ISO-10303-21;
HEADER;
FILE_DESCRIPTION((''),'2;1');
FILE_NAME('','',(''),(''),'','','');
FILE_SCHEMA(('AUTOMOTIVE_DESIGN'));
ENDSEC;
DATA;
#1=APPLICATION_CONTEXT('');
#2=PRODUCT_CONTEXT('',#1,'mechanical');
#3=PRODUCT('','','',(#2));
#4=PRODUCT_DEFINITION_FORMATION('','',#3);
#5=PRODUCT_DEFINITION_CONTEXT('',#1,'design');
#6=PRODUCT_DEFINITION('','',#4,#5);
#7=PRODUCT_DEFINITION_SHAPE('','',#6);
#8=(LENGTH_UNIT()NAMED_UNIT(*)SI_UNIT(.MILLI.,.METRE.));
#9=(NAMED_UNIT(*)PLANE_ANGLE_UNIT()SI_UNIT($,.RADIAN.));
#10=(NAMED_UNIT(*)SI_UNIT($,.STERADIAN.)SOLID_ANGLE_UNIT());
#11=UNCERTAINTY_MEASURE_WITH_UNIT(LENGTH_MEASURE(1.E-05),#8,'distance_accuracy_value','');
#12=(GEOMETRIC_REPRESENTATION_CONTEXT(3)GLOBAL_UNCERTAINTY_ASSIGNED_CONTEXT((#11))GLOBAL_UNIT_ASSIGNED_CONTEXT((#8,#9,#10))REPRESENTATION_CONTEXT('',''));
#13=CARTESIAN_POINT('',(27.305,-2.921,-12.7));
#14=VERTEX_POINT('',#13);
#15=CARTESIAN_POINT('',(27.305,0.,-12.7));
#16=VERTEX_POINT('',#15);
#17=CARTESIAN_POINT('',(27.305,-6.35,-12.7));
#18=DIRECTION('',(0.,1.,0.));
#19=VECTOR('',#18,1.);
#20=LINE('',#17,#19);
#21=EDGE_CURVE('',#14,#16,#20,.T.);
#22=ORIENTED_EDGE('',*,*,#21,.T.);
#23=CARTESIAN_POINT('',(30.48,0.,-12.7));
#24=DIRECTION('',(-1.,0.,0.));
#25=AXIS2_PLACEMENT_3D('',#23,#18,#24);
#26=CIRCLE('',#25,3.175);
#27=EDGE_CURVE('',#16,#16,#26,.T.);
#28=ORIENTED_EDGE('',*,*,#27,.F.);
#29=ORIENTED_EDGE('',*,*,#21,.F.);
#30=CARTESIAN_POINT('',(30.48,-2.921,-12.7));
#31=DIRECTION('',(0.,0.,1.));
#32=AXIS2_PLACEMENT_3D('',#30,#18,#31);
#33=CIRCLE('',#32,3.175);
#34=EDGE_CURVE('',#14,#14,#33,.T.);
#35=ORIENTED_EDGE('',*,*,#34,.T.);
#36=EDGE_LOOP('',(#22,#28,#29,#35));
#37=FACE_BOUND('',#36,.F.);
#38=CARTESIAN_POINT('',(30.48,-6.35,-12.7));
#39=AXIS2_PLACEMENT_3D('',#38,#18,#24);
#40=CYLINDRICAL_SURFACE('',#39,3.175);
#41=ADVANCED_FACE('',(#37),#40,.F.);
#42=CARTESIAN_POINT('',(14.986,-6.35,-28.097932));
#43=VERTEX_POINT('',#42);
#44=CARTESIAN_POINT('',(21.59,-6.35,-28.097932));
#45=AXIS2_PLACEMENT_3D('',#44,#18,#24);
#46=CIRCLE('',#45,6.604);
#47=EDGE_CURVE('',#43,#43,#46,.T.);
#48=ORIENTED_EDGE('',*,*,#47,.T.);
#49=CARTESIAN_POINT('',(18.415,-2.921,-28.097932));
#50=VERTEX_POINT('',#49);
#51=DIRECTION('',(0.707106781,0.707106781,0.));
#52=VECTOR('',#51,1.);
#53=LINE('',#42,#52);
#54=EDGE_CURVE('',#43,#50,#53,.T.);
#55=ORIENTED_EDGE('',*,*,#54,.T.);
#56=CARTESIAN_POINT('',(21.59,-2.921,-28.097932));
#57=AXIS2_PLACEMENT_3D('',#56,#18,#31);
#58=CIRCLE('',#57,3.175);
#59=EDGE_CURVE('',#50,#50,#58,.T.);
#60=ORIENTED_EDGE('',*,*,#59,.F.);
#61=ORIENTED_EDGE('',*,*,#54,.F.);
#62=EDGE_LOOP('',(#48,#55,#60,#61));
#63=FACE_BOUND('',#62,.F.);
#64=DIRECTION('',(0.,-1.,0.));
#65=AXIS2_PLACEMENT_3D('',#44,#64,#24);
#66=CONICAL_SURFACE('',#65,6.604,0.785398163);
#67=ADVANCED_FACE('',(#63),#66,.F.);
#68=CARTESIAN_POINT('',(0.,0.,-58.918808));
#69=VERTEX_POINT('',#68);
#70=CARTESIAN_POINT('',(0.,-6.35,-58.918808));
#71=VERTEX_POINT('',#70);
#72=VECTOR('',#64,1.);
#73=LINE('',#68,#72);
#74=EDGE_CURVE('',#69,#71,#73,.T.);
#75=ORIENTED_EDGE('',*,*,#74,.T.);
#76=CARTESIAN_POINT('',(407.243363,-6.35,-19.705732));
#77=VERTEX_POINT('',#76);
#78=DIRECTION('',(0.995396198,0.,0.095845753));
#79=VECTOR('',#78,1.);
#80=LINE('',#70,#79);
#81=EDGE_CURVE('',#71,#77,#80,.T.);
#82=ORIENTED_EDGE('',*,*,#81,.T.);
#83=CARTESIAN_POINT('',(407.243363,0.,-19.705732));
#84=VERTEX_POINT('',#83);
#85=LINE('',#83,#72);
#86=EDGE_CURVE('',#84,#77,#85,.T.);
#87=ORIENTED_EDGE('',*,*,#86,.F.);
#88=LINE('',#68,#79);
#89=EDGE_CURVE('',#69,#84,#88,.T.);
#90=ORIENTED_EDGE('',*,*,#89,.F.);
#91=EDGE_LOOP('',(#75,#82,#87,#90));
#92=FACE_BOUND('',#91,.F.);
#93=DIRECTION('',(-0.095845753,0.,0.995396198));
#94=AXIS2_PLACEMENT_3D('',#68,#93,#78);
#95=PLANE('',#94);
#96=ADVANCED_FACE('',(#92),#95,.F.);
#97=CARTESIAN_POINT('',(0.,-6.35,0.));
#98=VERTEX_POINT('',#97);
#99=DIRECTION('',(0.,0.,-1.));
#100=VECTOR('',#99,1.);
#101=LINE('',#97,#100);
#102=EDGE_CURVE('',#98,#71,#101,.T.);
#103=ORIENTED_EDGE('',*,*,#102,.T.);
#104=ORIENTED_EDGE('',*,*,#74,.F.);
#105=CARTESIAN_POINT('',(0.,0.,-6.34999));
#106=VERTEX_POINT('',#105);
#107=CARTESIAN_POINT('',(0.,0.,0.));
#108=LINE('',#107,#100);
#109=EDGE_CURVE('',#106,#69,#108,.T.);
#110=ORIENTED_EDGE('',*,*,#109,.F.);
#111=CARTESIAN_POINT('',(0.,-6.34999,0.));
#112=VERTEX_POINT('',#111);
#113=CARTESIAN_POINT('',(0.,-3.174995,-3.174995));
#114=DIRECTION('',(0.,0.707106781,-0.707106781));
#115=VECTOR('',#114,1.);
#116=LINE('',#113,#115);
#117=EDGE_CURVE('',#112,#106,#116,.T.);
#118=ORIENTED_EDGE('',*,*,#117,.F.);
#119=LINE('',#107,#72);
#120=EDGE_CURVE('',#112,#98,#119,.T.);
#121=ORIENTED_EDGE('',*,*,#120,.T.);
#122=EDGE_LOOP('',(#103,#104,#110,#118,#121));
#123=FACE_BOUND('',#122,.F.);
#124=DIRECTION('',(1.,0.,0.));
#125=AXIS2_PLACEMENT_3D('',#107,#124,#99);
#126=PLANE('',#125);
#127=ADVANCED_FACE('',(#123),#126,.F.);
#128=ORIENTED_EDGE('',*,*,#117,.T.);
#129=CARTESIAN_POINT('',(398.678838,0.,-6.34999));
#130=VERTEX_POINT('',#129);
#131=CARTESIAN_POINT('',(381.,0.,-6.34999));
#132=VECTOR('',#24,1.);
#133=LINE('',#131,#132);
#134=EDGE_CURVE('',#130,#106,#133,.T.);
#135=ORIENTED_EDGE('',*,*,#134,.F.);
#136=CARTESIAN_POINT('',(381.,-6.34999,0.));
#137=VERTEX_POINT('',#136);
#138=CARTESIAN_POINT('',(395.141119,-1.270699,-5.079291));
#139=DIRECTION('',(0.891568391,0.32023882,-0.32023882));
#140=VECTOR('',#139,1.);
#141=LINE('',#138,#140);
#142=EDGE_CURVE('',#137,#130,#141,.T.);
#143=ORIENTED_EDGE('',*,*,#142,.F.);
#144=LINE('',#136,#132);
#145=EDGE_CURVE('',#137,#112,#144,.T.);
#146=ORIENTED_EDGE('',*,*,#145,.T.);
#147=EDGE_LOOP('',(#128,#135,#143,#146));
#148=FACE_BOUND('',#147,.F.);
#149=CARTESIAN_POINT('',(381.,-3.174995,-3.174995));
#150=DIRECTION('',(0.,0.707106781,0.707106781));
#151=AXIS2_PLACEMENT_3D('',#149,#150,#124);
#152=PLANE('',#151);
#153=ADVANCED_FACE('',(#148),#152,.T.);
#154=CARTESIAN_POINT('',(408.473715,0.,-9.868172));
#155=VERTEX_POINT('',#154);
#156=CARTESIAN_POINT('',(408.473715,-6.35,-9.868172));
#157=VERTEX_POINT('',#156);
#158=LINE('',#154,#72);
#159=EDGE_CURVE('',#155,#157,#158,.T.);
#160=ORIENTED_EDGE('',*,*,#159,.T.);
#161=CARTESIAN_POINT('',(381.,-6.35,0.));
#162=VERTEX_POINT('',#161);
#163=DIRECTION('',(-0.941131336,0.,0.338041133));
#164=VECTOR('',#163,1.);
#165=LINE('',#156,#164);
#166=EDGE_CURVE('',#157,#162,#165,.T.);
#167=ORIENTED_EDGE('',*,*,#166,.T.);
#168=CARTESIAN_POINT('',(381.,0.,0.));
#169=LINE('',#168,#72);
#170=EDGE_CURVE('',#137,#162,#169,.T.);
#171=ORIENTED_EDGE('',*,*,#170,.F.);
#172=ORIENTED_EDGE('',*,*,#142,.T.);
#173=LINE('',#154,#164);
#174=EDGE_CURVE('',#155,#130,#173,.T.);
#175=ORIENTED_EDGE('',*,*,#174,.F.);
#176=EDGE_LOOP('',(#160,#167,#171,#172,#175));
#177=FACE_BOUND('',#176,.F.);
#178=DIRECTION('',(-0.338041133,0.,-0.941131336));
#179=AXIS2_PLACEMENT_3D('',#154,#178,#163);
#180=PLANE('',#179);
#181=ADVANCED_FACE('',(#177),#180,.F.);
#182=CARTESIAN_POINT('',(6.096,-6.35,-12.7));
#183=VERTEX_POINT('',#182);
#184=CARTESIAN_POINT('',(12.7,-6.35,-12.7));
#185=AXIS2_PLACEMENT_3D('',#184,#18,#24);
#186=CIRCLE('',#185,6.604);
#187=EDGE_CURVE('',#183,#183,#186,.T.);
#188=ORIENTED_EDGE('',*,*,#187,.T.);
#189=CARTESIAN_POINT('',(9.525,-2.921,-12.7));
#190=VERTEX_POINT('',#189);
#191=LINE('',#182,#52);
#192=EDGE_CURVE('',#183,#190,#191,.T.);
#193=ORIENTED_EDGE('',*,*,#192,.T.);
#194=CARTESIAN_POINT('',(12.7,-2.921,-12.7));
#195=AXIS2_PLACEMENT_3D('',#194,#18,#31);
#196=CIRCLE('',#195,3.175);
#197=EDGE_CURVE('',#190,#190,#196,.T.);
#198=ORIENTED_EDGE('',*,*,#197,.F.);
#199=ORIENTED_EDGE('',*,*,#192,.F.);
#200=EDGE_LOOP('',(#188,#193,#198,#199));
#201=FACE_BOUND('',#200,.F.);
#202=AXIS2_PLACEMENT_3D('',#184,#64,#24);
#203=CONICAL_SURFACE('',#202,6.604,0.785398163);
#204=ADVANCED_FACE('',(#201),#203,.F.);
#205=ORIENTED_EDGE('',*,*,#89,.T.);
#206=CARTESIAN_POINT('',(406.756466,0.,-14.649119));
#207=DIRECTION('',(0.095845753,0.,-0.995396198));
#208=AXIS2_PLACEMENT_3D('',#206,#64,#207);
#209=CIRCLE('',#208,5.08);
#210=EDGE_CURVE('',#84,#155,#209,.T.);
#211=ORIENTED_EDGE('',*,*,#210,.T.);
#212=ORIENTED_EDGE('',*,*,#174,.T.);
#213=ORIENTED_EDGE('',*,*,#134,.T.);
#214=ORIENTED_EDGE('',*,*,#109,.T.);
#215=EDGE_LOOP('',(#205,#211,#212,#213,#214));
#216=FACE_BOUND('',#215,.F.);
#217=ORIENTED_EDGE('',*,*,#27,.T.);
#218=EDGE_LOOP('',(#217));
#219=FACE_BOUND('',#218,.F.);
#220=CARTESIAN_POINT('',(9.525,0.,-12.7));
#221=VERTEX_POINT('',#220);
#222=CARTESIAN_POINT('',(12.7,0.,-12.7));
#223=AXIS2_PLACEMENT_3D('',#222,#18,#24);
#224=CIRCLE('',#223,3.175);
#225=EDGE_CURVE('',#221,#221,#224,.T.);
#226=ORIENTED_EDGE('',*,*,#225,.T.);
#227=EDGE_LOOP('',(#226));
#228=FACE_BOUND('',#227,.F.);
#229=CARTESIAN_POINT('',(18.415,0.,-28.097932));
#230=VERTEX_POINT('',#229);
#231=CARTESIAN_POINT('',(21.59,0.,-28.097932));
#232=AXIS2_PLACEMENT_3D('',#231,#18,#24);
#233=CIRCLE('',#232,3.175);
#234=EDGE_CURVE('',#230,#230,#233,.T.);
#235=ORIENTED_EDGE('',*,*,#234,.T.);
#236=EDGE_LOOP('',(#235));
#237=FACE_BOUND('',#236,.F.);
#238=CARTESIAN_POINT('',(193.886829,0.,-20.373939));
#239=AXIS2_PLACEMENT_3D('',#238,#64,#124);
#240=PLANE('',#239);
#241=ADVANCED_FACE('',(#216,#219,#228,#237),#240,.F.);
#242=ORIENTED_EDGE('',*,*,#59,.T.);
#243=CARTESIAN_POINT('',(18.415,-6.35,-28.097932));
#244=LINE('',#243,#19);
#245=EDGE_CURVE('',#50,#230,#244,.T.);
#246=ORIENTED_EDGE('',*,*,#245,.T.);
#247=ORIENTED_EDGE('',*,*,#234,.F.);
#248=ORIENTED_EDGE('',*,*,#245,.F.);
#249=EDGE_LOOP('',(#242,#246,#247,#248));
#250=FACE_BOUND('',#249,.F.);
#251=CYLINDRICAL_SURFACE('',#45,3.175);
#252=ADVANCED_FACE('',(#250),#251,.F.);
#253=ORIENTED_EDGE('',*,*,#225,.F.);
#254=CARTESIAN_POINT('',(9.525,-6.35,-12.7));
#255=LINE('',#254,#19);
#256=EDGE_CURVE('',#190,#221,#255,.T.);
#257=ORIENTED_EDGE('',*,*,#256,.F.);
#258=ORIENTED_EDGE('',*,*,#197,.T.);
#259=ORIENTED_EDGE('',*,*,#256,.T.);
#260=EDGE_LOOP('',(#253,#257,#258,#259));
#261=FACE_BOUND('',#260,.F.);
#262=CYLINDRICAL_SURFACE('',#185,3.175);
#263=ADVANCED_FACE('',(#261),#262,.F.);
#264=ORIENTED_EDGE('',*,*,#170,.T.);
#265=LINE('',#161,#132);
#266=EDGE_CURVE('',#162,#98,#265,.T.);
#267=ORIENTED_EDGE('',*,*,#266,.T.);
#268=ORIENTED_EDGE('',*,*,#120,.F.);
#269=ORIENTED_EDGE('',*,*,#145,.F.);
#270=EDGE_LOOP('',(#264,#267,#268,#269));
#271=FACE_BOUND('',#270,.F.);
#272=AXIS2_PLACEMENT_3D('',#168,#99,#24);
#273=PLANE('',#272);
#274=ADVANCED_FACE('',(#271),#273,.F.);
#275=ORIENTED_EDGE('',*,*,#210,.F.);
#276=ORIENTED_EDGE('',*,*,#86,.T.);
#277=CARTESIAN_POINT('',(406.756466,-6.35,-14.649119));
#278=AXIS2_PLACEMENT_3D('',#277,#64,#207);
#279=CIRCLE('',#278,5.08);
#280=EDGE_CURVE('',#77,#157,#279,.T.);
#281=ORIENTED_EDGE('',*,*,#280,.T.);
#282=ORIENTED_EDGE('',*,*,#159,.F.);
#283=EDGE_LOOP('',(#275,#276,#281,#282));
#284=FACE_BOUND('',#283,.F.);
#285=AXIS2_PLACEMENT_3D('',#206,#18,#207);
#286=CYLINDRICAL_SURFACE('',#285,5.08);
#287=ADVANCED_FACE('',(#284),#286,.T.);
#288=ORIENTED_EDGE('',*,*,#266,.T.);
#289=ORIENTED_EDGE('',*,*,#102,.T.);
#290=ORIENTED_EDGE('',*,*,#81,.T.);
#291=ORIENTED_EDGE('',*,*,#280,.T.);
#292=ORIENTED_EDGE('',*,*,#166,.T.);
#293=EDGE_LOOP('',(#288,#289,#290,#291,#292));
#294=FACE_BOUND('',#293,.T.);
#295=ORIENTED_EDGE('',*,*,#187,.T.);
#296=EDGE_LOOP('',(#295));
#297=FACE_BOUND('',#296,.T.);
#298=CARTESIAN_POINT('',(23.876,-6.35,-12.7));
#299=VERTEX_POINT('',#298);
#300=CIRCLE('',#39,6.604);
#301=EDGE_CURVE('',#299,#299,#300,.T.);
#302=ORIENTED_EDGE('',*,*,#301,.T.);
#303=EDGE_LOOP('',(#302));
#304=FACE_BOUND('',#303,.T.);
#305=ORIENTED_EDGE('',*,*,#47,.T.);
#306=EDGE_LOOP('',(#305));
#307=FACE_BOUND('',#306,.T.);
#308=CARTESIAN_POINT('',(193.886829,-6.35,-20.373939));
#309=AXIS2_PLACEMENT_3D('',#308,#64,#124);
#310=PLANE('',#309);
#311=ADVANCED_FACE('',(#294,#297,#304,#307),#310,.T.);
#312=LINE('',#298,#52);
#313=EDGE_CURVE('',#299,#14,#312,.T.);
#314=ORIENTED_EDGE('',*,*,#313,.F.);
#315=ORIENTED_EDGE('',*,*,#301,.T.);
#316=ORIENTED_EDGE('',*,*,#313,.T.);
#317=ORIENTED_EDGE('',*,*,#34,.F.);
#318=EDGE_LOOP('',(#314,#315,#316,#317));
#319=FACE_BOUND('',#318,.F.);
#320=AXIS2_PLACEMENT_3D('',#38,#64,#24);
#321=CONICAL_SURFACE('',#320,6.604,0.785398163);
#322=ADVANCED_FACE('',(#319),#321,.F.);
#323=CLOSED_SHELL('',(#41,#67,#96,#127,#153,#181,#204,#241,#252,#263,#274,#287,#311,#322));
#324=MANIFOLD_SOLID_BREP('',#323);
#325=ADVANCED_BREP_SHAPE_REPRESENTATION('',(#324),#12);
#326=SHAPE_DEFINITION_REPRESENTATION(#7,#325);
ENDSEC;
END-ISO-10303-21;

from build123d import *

# Parameters (mm, degrees)
F1_DEPTH       = 6.35
F3_D           = 6.35
F3_CSINK_D     = 13.208
F3_CSINK_ANGLE = 90
F4_SIZE        = 6.34999


# Not quite as in the source:
# - a fillet or chamfer is up to 0.001 mm smaller than in the source, because OpenCascade refuses the exact size


with BuildPart() as f1:
    # F0 (on Front) → F1 (new body)
    with BuildSketch(Plane.XZ):
        with BuildLine():
            Line((381, 0), (0, 0))
            Line((0, 0), (0, -58.9188076556))
            Line((0, -58.9188076556), (407.243362891, -19.705731858))
            ThreePointArc((407.243362891, -19.705731858), (411.7971966033, -15.2795473621), (408.473715423, -9.868171981))
            Line((408.473715423, -9.868171981), (381, 0))
        make_face()
    extrude(amount=F1_DEPTH)

    # F3 (through all)
    with Locations(Plane.XZ.offset(6.35)):
        with Locations((12.7, -12.7), (30.48, -12.7), (21.59, -28.0979316793)):
            CounterSinkHole(F3_D / 2, F3_CSINK_D / 2, counter_sink_angle=F3_CSINK_ANGLE)

    # F4 (size 6.35 in the source; OpenCascade refuses exactly that, so slightly less here)
    f4_edges = [f1.edges().sort_by_distance(p)[0] for p in [
        (190.5, 0, 0),
    ]]
    chamfer(f4_edges, length=F4_SIZE)


solid = f1.part
